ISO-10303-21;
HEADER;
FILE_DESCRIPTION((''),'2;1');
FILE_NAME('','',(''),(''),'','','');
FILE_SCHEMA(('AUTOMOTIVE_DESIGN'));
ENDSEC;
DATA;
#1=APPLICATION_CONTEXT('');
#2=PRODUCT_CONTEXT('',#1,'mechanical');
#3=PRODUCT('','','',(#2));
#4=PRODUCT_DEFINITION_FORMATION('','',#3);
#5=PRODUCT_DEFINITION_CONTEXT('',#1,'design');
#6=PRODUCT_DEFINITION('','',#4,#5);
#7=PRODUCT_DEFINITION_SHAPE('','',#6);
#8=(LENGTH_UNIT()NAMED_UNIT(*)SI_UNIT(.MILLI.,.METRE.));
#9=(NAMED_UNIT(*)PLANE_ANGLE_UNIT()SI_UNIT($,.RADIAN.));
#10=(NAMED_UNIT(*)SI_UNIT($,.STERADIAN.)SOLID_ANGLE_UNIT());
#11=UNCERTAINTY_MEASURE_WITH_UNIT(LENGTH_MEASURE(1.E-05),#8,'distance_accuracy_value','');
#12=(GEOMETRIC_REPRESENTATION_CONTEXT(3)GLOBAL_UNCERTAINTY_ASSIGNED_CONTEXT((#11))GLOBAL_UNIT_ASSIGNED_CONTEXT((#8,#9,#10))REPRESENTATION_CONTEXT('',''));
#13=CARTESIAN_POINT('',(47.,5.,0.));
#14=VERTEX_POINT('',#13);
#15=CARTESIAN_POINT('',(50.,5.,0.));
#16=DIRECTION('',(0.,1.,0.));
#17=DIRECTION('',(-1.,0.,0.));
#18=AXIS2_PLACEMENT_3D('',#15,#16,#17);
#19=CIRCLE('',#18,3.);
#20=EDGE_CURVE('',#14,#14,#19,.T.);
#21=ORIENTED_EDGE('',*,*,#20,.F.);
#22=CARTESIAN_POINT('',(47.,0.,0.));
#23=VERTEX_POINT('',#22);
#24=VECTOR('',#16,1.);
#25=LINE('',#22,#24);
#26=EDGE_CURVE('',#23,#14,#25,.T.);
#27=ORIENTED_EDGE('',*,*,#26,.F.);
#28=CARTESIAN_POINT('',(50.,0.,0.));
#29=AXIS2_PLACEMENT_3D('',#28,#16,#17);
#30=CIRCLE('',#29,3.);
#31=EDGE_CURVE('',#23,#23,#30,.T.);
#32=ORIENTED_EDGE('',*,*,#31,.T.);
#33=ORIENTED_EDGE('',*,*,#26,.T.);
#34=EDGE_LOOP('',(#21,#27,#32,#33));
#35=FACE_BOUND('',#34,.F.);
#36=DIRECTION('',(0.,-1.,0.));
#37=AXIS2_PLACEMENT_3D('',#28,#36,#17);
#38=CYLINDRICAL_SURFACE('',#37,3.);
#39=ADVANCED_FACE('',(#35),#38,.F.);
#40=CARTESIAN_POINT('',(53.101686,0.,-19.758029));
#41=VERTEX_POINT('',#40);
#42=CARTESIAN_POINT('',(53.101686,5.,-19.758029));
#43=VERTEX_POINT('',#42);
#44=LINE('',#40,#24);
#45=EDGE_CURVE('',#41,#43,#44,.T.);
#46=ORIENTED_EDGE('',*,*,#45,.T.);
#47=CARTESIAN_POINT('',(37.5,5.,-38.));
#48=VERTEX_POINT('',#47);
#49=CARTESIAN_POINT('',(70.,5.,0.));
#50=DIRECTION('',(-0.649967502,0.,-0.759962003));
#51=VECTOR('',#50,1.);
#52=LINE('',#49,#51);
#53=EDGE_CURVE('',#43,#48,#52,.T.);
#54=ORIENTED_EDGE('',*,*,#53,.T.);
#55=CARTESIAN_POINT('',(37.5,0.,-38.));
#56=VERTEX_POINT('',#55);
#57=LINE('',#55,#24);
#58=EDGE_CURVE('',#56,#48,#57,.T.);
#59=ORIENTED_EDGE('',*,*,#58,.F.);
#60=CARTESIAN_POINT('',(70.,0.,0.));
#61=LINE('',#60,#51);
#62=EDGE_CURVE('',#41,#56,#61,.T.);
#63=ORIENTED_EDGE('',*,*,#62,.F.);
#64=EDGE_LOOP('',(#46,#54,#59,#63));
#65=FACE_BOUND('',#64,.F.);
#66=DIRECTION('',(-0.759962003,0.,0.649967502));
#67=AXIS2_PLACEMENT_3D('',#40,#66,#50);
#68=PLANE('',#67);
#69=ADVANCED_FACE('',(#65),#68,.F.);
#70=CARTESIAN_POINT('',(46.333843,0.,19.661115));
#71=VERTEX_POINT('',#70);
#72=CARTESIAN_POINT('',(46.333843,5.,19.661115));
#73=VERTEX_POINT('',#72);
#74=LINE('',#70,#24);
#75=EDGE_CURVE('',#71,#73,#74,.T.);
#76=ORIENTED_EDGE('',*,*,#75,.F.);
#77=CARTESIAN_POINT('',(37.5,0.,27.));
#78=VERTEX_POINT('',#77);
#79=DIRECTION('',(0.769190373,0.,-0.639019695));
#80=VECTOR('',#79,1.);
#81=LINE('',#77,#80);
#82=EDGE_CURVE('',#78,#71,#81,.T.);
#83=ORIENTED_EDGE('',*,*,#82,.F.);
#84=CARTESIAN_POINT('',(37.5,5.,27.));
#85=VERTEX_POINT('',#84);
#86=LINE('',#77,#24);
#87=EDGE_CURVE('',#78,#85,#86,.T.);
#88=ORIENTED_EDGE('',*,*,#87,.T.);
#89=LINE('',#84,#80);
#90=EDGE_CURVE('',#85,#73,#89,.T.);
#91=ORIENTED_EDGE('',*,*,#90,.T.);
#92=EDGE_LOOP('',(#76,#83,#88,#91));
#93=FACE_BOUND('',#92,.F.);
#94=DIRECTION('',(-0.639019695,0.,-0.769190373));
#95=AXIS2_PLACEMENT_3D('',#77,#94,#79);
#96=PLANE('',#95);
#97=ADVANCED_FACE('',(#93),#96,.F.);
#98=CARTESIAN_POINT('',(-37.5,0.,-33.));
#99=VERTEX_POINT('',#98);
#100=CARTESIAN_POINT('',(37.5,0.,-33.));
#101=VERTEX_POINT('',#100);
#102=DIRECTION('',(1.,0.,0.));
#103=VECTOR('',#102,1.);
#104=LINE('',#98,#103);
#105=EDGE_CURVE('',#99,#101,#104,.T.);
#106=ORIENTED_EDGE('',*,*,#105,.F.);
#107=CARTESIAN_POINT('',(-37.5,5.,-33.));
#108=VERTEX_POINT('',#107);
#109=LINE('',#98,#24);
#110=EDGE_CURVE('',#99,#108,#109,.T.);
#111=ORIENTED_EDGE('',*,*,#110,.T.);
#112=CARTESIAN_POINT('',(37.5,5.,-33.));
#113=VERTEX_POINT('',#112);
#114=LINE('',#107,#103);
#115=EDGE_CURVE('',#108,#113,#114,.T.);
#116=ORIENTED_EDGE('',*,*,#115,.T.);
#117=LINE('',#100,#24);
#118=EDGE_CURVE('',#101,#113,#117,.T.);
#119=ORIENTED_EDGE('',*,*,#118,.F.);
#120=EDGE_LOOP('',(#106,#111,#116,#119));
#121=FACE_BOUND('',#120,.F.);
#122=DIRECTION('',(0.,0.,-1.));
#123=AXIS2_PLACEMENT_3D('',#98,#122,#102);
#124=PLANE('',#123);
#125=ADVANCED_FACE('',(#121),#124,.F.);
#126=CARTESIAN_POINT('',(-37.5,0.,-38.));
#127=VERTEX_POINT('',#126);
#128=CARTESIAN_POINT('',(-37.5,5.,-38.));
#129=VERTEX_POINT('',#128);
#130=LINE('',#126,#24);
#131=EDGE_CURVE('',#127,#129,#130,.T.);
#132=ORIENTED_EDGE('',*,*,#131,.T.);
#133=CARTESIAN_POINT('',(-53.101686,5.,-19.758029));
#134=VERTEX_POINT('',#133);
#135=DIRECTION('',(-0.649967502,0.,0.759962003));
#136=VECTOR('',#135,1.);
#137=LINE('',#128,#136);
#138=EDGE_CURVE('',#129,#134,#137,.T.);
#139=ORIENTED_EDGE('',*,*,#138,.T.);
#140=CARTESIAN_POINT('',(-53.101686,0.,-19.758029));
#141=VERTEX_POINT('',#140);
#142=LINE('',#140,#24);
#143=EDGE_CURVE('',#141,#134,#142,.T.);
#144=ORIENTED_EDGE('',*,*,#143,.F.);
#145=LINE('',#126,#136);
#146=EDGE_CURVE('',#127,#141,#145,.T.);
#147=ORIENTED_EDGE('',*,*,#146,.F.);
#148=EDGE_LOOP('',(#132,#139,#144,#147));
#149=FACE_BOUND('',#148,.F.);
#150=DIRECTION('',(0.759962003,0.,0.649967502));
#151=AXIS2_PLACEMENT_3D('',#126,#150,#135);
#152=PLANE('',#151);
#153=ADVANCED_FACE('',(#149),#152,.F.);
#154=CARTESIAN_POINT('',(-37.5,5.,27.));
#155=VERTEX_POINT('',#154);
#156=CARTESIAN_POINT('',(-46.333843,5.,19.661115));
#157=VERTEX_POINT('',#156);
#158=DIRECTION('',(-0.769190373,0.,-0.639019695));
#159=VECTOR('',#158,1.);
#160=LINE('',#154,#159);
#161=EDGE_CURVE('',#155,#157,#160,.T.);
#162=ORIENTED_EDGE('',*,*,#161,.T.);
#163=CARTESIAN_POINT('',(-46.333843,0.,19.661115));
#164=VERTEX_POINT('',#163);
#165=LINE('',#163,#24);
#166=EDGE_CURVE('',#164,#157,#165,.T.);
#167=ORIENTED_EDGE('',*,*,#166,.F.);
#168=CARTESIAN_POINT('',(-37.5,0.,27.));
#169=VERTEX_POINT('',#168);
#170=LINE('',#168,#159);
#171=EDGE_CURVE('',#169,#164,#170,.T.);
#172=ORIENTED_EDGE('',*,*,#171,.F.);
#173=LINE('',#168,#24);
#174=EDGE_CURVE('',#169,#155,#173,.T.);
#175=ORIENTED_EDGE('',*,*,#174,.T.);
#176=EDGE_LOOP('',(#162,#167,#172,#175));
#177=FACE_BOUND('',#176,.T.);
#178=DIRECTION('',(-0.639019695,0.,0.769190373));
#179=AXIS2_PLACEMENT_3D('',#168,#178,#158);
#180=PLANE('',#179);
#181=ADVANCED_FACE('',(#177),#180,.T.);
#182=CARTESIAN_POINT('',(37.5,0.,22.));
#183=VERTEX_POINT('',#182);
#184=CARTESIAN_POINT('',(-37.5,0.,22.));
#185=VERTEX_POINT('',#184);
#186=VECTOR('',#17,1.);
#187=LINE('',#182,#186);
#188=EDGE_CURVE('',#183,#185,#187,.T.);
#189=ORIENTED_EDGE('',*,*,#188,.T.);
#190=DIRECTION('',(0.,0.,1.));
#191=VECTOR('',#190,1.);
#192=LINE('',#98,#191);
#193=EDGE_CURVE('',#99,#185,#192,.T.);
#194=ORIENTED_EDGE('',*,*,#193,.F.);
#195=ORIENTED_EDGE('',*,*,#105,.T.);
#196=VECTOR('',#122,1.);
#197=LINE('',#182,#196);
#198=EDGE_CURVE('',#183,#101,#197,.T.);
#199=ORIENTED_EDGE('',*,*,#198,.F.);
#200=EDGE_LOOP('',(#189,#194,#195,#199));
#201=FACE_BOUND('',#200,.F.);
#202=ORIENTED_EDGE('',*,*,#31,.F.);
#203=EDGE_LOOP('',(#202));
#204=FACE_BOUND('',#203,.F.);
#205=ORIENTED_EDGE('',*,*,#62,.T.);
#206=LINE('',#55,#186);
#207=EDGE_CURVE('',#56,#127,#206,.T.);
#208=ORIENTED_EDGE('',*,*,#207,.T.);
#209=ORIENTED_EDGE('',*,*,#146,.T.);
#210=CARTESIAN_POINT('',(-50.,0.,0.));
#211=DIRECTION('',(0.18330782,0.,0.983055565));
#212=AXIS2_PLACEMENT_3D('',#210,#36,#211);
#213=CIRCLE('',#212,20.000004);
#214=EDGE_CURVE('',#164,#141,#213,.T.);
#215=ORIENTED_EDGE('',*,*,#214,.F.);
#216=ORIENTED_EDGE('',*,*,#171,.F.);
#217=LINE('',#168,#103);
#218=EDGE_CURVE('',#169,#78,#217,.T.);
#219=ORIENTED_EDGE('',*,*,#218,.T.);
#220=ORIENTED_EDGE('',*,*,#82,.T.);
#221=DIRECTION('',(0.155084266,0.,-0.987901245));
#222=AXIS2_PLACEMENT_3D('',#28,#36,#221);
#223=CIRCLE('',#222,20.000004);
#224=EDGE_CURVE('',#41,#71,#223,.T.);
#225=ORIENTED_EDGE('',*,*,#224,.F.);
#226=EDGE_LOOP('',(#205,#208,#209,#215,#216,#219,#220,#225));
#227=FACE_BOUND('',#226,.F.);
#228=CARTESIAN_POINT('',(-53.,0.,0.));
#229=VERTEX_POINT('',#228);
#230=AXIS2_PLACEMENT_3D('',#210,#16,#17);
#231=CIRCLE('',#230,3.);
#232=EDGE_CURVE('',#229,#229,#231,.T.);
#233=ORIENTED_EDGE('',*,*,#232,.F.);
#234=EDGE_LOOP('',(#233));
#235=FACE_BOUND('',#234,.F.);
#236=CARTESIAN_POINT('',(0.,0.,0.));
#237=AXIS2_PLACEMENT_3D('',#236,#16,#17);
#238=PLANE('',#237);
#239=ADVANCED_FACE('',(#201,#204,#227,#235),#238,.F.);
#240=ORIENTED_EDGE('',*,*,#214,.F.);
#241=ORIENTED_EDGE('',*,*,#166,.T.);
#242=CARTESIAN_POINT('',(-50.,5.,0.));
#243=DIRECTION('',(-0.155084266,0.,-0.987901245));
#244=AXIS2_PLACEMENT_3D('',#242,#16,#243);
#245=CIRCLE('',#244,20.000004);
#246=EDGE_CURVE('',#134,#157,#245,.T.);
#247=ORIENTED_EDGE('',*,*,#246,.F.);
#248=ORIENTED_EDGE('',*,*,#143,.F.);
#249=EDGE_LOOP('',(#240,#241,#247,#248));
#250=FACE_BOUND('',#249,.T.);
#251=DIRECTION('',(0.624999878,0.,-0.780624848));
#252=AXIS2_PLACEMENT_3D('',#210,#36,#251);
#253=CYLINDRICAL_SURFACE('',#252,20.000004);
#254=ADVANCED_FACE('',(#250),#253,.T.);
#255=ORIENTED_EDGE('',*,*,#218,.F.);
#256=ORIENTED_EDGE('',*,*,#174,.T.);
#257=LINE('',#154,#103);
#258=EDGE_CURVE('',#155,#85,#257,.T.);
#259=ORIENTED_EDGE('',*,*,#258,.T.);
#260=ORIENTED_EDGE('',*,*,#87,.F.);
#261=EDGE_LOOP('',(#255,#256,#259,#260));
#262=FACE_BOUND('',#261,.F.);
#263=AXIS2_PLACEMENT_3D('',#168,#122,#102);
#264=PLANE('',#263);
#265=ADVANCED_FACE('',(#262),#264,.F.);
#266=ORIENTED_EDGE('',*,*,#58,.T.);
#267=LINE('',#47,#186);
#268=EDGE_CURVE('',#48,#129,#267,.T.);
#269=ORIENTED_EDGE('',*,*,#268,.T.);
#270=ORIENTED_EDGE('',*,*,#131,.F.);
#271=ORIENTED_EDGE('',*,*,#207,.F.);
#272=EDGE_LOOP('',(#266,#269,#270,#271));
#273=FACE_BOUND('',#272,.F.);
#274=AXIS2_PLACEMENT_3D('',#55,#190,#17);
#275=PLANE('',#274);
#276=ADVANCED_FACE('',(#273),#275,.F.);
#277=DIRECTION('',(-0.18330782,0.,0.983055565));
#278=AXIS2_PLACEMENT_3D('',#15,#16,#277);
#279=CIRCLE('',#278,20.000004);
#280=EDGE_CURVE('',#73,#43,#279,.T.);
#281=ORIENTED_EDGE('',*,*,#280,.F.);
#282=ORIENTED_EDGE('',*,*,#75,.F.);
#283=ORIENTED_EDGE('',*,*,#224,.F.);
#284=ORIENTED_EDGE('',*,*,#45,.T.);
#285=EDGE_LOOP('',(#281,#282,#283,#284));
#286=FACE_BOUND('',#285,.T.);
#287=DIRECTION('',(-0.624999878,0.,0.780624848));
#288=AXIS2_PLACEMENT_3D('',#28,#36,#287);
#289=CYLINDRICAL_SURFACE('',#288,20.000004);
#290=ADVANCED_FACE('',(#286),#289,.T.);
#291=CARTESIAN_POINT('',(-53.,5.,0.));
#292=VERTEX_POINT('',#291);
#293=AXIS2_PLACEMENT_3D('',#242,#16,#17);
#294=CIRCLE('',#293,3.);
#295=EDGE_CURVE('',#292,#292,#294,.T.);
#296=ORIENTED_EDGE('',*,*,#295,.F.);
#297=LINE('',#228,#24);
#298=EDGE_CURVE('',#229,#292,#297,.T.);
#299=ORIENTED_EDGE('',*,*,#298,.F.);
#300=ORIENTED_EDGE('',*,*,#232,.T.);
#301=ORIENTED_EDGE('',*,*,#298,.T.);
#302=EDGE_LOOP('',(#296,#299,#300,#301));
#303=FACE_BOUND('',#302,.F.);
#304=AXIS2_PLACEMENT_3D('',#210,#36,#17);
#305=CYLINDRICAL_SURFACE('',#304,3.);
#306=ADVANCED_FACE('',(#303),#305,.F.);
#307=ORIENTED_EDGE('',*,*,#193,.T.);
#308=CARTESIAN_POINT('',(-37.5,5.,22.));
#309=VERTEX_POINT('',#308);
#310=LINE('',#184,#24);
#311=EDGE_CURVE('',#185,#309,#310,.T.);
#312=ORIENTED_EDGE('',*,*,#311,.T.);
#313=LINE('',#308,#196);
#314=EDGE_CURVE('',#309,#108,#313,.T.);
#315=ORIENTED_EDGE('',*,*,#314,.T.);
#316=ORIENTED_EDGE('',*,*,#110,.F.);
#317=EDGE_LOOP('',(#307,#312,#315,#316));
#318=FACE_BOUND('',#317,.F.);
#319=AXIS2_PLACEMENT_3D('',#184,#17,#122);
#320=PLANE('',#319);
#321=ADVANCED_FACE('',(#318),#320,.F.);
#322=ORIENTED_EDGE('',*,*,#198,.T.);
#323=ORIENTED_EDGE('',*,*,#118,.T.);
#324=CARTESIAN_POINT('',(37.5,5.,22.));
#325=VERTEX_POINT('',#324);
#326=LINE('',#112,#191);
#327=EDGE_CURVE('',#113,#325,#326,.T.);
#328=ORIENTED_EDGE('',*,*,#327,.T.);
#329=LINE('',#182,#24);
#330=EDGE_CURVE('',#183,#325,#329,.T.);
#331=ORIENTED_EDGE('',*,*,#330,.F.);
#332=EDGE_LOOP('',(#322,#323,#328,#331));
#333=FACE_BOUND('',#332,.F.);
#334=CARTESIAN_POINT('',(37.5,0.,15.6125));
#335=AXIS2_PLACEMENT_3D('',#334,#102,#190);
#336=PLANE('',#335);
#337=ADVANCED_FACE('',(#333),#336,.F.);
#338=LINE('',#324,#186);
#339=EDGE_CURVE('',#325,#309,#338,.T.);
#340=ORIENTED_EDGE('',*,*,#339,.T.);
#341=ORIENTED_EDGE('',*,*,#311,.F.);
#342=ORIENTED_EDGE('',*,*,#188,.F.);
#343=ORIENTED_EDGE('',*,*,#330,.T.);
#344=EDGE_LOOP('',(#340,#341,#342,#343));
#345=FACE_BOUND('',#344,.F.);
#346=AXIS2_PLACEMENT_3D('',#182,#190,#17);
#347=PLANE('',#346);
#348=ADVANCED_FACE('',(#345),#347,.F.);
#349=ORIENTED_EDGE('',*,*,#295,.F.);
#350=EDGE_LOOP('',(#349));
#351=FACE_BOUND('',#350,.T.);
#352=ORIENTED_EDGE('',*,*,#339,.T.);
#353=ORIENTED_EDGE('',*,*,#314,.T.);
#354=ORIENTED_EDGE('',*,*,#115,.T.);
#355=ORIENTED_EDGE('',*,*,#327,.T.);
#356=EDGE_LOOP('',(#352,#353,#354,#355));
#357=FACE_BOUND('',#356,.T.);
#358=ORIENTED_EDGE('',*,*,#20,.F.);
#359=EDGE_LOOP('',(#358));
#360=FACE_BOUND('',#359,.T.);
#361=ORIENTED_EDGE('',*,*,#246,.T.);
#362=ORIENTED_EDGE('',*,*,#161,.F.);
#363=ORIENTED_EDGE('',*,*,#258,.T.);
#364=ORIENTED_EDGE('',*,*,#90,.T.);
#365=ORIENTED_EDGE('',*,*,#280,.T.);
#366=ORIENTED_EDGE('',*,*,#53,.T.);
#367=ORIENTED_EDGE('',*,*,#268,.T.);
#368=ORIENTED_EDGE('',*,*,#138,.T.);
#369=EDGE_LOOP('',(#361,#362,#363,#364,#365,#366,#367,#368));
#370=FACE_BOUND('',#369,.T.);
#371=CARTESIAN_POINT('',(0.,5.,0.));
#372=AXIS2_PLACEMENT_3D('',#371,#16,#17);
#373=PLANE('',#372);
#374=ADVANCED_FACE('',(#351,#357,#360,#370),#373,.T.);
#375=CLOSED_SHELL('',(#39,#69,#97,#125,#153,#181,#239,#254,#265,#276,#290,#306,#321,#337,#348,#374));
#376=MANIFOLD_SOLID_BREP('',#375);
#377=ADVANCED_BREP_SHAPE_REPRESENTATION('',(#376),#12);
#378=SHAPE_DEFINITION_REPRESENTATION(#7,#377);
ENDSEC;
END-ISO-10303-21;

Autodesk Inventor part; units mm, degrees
ref_plane "YZ Plane" through (0, 0, 0) normal (1, 0, 0) x (0, 1, 0)
ref_plane "XZ Plane" through (0, 0, 0) normal (0, 1, 0) x (-1, 0, 0)
ref_plane "XY Plane" through (0, 0, 0) normal (0, 0, 1) x (1, 0, 0)
sketch "Esquisse1" plane through (0, 0, 0) normal (0, 1, 0) x (-1, 0, 0)
  line L0 (-37.5, 22) -> (37.5, 22)
  line L1 (37.5, 22) -> (37.5, -33)
  line L2 (37.5, -33) -> (-37.5, -33)
  line L3 (-37.5, -33) -> (-37.5, 22)
  line L4 (-37.5, 22) -> (37.5, 22)
  line L5 (37.5, 22) -> (37.5, 27)
  line L6 (37.5, 27) -> (-37.5, 27)
  line L7 (-37.5, 27) -> (-37.5, 22)
  line L8 (37.5, -33) -> (-37.5, -33)
  line L9 (-37.5, -33) -> (-37.5, -38)
  line L10 (-37.5, -38) -> (37.5, -38)
  line L11 (37.5, -38) -> (37.5, -33)
  circle A0 centre (-50, 0) radius 3
  arc A1 (-37.5, 15.6125) -> (-37.5, -15.6125) centre (-50, 0) ccw
  circle A2 centre (50, 0) radius 3
  arc A3 (37.5, -15.6125) -> (37.5, 15.6125) centre (50, 0) ccw
  line L12 (0, 0) -> (124.0045, 0) construction
  line L13 (-37.5, 27) -> (-70, 0)
  line L14 (-70, 0) -> (-37.5, -38)
  line L15 (37.5, 27) -> (70, 0)
  line L16 (37.5, -38) -> (70, 0)
  arc A4 (-37.5, -15.6125) -> (-37.5, 15.6125) centre (-50, 0) ccw
  arc A5 (30, 0) -> (37.5, -15.6125) centre (50, 0) ccw
  arc A6 (37.5, 15.6125) -> (30, 0) centre (50, 0) ccw
  dimension "d0" = 6
  dimension "d1" = 6
  dimension "d2" = 40
  dimension "d3" = 40
  dimension "d4" = 75
  dimension "d5" = 37.5
  dimension "d6" = 22
  dimension "d7" = 55
  dimension "d8" = 5
  dimension "d9" = 5
  dimension "d10" = 100
  dimension "d11" = 50
extrude "Extrusion1" add sketch "Esquisse1" along normal blind 5 contours L7 L6 L5 L0 | L3 A1 L13 L7 | L5 L15 A3 L1 | L3 A1 L14 L13 | A3 L15 L16 L1 | L3 L9 L14 A1 | L13 A1 | A3 L16 L11 L1 | A3 L15 | L2 L11 L10 L9 | A1 L14 | L16 A3
equation "\"d5\" = 0.5 * d4"
equation "\"d9\" = d8"
equation "\"d11\" = 0.5 * d10"
properties part number "support_batteries"
